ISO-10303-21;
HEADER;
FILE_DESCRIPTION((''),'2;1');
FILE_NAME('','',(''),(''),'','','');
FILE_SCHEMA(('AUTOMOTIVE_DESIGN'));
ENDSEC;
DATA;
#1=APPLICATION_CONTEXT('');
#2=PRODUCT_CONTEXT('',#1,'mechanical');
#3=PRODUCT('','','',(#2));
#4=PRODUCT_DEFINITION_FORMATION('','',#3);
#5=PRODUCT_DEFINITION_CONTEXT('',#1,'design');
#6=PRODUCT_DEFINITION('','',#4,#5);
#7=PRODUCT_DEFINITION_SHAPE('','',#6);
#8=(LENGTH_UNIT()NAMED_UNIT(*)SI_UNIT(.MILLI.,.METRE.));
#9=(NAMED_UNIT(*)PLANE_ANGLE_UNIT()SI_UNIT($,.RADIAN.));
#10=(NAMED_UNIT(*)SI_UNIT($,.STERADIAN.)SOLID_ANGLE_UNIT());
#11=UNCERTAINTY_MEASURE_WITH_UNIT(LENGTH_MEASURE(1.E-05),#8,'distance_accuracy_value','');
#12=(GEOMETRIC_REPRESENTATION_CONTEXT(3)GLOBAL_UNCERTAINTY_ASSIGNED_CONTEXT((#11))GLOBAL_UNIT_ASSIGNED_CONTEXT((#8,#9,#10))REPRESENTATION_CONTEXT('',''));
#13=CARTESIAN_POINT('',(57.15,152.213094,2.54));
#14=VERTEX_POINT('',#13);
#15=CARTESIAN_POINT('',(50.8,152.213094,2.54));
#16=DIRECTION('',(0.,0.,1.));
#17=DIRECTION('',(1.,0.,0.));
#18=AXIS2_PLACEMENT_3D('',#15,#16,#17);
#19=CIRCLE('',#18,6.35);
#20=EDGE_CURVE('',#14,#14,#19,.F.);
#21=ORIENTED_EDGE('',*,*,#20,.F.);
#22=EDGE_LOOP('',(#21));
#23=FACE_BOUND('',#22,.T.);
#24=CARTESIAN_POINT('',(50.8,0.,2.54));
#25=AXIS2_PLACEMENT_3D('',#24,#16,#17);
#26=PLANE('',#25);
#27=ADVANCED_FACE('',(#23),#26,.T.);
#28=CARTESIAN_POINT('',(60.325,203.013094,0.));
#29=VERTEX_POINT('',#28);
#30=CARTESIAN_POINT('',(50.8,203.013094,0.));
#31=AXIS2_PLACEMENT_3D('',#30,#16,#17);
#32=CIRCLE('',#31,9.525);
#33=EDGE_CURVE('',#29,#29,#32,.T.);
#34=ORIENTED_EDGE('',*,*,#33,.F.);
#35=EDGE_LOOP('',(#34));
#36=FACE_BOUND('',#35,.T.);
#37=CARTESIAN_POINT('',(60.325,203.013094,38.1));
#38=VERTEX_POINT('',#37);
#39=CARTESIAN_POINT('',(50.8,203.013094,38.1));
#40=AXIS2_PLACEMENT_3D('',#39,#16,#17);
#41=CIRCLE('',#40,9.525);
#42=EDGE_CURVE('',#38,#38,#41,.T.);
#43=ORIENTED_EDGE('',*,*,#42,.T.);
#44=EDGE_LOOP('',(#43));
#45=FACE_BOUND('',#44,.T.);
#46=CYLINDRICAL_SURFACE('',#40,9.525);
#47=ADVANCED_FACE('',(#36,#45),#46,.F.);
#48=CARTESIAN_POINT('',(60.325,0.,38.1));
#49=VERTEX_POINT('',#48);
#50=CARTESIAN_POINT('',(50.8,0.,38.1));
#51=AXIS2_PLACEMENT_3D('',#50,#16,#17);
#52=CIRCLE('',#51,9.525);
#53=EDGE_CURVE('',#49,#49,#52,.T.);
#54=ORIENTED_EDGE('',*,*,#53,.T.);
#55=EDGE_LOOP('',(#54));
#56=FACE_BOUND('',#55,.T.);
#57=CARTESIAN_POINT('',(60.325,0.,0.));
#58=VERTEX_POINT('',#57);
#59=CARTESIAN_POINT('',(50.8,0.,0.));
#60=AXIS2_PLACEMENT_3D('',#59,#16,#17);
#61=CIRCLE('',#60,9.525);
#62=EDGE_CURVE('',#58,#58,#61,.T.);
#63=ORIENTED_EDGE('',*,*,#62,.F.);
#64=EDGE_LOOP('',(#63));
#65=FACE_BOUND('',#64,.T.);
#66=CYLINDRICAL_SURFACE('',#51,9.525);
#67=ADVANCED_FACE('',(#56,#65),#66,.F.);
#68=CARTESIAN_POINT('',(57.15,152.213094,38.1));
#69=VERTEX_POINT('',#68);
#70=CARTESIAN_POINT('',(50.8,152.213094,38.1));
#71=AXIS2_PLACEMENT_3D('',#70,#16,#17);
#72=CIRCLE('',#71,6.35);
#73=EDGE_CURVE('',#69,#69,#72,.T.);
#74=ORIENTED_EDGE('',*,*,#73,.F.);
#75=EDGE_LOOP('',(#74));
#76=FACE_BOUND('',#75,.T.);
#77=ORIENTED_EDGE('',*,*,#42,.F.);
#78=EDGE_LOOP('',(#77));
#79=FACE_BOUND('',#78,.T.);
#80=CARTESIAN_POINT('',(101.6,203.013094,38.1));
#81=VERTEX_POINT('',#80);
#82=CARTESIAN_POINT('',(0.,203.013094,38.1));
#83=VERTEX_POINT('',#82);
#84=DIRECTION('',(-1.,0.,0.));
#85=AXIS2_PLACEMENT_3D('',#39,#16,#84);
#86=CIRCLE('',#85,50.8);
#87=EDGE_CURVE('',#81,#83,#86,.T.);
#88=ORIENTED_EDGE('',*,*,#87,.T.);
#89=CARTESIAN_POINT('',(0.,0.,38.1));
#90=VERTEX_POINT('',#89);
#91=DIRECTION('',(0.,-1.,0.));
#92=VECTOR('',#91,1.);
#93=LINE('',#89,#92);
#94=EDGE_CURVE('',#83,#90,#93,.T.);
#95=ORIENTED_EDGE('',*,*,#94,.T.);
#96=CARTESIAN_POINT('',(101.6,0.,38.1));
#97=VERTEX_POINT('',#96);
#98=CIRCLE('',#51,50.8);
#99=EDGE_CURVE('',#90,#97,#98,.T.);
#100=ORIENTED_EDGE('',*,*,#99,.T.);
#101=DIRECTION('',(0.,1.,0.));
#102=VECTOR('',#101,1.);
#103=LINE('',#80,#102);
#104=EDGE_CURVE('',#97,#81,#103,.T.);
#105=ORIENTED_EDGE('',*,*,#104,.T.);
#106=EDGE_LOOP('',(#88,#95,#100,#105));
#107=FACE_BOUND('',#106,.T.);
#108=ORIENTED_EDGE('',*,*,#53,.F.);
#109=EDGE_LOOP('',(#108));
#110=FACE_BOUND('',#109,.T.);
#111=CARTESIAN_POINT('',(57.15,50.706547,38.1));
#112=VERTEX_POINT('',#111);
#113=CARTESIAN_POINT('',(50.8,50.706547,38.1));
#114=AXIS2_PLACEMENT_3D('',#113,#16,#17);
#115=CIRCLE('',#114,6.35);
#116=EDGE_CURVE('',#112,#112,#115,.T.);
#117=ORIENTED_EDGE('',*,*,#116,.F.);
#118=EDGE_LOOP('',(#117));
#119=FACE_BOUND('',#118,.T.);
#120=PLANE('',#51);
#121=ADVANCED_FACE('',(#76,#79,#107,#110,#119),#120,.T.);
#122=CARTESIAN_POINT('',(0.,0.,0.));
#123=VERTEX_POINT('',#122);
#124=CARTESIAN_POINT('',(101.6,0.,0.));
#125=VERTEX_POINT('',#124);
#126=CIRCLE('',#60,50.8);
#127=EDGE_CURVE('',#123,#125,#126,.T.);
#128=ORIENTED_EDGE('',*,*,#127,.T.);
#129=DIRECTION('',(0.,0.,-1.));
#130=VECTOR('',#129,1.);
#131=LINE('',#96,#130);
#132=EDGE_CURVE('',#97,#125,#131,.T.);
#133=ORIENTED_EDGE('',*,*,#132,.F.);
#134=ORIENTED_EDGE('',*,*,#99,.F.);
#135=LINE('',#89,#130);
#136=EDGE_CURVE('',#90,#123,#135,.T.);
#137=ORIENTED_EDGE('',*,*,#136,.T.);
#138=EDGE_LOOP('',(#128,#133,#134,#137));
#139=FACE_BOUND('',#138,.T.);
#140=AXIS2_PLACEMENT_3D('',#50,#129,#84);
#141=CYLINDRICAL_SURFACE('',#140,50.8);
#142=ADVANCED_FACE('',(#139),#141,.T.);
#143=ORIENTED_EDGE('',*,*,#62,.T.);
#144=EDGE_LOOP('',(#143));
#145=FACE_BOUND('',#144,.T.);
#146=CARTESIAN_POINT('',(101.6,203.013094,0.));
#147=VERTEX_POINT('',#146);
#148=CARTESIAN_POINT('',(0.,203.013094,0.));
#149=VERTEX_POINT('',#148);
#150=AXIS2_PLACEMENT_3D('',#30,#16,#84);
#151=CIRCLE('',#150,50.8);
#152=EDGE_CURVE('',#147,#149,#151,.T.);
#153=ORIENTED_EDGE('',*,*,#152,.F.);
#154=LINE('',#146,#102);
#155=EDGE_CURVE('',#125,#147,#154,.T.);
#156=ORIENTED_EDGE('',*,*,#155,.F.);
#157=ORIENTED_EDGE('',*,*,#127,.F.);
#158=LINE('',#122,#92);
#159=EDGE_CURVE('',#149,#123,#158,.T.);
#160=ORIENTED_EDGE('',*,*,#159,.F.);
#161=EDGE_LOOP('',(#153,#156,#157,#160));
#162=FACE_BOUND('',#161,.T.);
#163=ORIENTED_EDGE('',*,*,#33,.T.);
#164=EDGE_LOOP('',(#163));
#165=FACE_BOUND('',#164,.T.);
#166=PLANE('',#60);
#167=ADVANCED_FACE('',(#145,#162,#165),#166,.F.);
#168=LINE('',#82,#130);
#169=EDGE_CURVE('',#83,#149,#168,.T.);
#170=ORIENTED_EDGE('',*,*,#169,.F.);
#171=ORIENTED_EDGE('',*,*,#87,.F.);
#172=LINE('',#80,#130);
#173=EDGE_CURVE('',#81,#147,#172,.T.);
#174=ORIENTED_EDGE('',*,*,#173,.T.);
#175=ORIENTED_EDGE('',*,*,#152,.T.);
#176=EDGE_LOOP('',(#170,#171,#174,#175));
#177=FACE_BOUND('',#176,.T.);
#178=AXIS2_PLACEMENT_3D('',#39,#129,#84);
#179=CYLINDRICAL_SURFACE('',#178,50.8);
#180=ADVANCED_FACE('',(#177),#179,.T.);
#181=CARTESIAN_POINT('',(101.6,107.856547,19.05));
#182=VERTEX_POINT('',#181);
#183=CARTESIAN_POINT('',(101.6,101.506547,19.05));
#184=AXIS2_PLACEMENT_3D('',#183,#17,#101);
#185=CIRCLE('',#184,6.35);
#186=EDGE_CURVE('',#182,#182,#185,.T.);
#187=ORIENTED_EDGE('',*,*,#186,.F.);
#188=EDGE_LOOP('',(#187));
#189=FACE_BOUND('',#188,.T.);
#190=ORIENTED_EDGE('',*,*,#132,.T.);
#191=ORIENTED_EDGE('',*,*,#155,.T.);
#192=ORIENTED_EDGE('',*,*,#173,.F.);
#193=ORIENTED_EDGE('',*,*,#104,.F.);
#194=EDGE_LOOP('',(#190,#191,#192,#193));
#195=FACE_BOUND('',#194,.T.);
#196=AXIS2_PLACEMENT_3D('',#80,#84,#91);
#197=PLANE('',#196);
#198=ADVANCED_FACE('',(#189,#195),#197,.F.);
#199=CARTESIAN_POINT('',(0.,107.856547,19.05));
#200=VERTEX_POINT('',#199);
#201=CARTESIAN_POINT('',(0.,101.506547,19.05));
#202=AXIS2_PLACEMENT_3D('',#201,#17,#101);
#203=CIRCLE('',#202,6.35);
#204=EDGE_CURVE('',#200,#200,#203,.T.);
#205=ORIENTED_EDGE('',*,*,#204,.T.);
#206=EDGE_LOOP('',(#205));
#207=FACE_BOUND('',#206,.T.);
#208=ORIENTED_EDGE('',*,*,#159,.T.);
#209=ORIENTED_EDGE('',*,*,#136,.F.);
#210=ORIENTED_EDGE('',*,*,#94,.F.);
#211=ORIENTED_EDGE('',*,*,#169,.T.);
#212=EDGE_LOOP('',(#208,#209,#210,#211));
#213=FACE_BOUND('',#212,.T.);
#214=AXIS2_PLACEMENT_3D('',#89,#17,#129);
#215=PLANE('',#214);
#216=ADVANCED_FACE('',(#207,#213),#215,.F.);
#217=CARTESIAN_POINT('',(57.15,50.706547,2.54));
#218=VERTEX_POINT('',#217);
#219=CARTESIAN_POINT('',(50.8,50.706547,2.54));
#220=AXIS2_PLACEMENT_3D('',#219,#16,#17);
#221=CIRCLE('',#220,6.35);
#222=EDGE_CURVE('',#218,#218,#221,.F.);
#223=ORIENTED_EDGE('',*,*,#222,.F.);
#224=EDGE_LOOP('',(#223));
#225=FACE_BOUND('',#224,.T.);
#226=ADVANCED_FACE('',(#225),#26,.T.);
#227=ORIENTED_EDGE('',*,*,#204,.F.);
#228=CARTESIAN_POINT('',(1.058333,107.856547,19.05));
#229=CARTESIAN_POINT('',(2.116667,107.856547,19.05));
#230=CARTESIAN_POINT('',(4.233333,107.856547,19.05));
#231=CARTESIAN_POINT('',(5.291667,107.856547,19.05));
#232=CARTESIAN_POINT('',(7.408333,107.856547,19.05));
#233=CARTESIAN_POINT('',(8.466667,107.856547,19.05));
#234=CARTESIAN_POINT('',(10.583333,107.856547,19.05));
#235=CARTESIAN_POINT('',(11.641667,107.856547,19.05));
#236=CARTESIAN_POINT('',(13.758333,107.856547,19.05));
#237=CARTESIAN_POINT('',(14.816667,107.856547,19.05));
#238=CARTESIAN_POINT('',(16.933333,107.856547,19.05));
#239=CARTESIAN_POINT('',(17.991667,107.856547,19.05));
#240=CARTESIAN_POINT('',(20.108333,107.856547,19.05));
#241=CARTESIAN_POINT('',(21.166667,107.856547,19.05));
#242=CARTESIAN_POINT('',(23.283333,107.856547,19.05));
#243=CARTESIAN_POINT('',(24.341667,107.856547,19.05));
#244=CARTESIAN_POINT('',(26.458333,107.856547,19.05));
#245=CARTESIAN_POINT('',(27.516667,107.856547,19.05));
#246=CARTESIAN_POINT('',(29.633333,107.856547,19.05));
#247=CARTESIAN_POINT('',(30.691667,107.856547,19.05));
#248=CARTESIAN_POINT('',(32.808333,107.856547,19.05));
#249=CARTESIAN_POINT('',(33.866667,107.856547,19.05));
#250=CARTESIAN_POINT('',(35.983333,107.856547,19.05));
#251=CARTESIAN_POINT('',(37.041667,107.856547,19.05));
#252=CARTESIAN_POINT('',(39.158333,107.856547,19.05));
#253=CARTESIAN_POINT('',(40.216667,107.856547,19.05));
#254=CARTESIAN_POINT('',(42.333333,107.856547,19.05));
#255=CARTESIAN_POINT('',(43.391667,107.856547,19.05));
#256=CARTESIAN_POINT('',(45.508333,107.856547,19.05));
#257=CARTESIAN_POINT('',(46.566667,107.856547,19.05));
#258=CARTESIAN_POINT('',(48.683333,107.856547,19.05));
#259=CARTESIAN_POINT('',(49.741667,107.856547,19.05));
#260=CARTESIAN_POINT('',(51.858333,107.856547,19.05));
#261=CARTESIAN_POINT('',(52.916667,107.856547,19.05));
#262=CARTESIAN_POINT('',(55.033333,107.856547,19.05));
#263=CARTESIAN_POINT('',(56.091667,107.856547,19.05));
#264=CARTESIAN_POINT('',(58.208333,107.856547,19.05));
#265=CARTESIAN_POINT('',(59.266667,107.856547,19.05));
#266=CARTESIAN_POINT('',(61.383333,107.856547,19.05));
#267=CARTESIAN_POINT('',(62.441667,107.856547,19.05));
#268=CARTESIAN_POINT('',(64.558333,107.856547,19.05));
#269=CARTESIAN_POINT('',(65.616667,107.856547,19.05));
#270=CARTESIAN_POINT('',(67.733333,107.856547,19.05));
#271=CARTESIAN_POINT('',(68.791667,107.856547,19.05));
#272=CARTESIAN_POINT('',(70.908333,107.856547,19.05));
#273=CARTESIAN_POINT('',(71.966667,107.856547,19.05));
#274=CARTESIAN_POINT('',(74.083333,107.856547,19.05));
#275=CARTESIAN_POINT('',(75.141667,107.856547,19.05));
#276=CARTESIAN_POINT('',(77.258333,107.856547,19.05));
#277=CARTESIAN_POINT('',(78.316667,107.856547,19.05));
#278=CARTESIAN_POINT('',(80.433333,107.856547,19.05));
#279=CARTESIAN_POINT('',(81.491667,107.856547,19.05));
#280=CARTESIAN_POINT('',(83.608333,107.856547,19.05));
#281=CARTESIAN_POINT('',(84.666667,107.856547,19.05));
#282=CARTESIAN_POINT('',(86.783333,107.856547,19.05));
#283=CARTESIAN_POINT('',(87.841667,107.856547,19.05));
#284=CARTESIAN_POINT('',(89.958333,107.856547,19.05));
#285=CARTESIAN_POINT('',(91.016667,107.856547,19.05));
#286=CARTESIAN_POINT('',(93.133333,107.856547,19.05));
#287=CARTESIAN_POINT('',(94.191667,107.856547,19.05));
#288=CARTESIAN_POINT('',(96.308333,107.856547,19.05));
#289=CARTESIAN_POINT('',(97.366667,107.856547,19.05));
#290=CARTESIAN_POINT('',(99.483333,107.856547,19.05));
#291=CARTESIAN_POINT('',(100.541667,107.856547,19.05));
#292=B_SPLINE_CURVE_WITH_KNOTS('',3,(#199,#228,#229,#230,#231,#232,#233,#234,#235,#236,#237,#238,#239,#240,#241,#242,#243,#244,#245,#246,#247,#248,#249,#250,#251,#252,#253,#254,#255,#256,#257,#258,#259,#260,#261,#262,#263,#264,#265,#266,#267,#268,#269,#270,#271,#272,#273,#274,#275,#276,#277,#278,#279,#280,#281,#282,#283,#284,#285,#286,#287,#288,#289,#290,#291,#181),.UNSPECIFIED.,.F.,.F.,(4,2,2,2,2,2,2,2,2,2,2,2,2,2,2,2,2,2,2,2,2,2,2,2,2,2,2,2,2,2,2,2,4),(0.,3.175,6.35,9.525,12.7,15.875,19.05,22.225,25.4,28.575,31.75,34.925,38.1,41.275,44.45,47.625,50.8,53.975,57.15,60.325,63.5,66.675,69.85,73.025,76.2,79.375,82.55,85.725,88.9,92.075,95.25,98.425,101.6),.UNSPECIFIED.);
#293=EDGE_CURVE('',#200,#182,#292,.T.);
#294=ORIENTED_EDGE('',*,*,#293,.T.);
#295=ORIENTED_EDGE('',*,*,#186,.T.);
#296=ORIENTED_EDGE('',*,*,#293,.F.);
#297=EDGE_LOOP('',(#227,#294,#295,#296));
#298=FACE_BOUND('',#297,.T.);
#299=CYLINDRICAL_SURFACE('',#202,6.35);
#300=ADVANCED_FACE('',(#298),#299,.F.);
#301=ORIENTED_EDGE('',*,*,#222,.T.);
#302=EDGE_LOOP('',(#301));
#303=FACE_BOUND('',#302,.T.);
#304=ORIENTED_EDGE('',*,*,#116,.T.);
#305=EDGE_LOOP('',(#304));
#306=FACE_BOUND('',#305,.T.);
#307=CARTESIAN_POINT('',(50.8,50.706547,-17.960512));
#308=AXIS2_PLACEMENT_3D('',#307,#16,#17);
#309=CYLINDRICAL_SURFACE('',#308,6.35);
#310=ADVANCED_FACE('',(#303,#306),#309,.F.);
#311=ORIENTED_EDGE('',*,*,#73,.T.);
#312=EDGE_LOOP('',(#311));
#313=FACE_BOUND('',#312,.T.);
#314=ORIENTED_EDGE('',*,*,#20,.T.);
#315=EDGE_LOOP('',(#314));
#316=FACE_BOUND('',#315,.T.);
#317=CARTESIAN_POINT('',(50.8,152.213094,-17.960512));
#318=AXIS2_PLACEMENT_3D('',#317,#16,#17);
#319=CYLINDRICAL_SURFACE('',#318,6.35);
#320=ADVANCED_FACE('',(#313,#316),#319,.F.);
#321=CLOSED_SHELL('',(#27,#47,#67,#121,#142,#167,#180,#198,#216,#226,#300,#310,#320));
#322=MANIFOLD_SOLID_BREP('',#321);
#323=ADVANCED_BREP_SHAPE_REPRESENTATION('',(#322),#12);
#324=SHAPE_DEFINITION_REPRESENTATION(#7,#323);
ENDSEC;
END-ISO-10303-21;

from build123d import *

# Parameters (mm, degrees)
BOSS_EXTRUDE1_DEPTH     = 38.1
SKETCH2_R               = 6.35
CUT_EXTRUDE1_DEPTH      = 277.034883433
ADVANCEDHOLE3_OUTLINE_R = 9.525
ADVANCEDHOLE3_DEPTH     = 38.1
SKETCH21_R              = 6.35
CUT_EXTRUDE2_DEPTH      = 35.56


# Read off the part's stored shape, not the designer's step: AdvancedHole3
with BuildPart() as part:
    # Sketch1 → Boss-Extrude1 (new body)
    with BuildSketch(Plane.XY):
        with BuildLine():
            Line((0, 0), (0, 203.013094366))
            ThreePointArc((0, 203.013094366), (50.8, 253.813094366), (101.6, 203.013094366))
            Line((101.6, 203.013094366), (101.6, 0))
            ThreePointArc((101.6, 0), (50.8, -50.8), (0, 0))
        make_face()
    extrude(amount=BOSS_EXTRUDE1_DEPTH)

    # Sketch2 → Cut-Extrude1 (cut, through all)
    with BuildSketch(Plane(origin=(101.6, 0, 0), x_dir=(0, 0, -1), z_dir=(1, 0, 0))):
        with Locations(Location((-19.05, 101.506547183, 0), (0, 0, 90))):
            Circle(SKETCH2_R)
    extrude(amount=-CUT_EXTRUDE1_DEPTH, mode=Mode.SUBTRACT)

    # AdvancedHole3 outline → AdvancedHole3 (cut)
    with BuildSketch(Plane.XY):
        with Locations((50.8, 203.013094366)):
            Circle(ADVANCEDHOLE3_OUTLINE_R)
        with Locations((50.8, 0)):
            Circle(ADVANCEDHOLE3_OUTLINE_R)
    extrude(amount=ADVANCEDHOLE3_DEPTH, mode=Mode.SUBTRACT)

    # Sketch21 → Cut-Extrude2 (cut)
    with BuildSketch(Plane.XY.offset(38.1)):
        with Locations((50.8, 50.706547183)):
            Circle(SKETCH21_R)
        with Locations((50.8, 152.213094366)):
            Circle(SKETCH21_R)
    extrude(amount=-CUT_EXTRUDE2_DEPTH, mode=Mode.SUBTRACT)


solid = part.part
